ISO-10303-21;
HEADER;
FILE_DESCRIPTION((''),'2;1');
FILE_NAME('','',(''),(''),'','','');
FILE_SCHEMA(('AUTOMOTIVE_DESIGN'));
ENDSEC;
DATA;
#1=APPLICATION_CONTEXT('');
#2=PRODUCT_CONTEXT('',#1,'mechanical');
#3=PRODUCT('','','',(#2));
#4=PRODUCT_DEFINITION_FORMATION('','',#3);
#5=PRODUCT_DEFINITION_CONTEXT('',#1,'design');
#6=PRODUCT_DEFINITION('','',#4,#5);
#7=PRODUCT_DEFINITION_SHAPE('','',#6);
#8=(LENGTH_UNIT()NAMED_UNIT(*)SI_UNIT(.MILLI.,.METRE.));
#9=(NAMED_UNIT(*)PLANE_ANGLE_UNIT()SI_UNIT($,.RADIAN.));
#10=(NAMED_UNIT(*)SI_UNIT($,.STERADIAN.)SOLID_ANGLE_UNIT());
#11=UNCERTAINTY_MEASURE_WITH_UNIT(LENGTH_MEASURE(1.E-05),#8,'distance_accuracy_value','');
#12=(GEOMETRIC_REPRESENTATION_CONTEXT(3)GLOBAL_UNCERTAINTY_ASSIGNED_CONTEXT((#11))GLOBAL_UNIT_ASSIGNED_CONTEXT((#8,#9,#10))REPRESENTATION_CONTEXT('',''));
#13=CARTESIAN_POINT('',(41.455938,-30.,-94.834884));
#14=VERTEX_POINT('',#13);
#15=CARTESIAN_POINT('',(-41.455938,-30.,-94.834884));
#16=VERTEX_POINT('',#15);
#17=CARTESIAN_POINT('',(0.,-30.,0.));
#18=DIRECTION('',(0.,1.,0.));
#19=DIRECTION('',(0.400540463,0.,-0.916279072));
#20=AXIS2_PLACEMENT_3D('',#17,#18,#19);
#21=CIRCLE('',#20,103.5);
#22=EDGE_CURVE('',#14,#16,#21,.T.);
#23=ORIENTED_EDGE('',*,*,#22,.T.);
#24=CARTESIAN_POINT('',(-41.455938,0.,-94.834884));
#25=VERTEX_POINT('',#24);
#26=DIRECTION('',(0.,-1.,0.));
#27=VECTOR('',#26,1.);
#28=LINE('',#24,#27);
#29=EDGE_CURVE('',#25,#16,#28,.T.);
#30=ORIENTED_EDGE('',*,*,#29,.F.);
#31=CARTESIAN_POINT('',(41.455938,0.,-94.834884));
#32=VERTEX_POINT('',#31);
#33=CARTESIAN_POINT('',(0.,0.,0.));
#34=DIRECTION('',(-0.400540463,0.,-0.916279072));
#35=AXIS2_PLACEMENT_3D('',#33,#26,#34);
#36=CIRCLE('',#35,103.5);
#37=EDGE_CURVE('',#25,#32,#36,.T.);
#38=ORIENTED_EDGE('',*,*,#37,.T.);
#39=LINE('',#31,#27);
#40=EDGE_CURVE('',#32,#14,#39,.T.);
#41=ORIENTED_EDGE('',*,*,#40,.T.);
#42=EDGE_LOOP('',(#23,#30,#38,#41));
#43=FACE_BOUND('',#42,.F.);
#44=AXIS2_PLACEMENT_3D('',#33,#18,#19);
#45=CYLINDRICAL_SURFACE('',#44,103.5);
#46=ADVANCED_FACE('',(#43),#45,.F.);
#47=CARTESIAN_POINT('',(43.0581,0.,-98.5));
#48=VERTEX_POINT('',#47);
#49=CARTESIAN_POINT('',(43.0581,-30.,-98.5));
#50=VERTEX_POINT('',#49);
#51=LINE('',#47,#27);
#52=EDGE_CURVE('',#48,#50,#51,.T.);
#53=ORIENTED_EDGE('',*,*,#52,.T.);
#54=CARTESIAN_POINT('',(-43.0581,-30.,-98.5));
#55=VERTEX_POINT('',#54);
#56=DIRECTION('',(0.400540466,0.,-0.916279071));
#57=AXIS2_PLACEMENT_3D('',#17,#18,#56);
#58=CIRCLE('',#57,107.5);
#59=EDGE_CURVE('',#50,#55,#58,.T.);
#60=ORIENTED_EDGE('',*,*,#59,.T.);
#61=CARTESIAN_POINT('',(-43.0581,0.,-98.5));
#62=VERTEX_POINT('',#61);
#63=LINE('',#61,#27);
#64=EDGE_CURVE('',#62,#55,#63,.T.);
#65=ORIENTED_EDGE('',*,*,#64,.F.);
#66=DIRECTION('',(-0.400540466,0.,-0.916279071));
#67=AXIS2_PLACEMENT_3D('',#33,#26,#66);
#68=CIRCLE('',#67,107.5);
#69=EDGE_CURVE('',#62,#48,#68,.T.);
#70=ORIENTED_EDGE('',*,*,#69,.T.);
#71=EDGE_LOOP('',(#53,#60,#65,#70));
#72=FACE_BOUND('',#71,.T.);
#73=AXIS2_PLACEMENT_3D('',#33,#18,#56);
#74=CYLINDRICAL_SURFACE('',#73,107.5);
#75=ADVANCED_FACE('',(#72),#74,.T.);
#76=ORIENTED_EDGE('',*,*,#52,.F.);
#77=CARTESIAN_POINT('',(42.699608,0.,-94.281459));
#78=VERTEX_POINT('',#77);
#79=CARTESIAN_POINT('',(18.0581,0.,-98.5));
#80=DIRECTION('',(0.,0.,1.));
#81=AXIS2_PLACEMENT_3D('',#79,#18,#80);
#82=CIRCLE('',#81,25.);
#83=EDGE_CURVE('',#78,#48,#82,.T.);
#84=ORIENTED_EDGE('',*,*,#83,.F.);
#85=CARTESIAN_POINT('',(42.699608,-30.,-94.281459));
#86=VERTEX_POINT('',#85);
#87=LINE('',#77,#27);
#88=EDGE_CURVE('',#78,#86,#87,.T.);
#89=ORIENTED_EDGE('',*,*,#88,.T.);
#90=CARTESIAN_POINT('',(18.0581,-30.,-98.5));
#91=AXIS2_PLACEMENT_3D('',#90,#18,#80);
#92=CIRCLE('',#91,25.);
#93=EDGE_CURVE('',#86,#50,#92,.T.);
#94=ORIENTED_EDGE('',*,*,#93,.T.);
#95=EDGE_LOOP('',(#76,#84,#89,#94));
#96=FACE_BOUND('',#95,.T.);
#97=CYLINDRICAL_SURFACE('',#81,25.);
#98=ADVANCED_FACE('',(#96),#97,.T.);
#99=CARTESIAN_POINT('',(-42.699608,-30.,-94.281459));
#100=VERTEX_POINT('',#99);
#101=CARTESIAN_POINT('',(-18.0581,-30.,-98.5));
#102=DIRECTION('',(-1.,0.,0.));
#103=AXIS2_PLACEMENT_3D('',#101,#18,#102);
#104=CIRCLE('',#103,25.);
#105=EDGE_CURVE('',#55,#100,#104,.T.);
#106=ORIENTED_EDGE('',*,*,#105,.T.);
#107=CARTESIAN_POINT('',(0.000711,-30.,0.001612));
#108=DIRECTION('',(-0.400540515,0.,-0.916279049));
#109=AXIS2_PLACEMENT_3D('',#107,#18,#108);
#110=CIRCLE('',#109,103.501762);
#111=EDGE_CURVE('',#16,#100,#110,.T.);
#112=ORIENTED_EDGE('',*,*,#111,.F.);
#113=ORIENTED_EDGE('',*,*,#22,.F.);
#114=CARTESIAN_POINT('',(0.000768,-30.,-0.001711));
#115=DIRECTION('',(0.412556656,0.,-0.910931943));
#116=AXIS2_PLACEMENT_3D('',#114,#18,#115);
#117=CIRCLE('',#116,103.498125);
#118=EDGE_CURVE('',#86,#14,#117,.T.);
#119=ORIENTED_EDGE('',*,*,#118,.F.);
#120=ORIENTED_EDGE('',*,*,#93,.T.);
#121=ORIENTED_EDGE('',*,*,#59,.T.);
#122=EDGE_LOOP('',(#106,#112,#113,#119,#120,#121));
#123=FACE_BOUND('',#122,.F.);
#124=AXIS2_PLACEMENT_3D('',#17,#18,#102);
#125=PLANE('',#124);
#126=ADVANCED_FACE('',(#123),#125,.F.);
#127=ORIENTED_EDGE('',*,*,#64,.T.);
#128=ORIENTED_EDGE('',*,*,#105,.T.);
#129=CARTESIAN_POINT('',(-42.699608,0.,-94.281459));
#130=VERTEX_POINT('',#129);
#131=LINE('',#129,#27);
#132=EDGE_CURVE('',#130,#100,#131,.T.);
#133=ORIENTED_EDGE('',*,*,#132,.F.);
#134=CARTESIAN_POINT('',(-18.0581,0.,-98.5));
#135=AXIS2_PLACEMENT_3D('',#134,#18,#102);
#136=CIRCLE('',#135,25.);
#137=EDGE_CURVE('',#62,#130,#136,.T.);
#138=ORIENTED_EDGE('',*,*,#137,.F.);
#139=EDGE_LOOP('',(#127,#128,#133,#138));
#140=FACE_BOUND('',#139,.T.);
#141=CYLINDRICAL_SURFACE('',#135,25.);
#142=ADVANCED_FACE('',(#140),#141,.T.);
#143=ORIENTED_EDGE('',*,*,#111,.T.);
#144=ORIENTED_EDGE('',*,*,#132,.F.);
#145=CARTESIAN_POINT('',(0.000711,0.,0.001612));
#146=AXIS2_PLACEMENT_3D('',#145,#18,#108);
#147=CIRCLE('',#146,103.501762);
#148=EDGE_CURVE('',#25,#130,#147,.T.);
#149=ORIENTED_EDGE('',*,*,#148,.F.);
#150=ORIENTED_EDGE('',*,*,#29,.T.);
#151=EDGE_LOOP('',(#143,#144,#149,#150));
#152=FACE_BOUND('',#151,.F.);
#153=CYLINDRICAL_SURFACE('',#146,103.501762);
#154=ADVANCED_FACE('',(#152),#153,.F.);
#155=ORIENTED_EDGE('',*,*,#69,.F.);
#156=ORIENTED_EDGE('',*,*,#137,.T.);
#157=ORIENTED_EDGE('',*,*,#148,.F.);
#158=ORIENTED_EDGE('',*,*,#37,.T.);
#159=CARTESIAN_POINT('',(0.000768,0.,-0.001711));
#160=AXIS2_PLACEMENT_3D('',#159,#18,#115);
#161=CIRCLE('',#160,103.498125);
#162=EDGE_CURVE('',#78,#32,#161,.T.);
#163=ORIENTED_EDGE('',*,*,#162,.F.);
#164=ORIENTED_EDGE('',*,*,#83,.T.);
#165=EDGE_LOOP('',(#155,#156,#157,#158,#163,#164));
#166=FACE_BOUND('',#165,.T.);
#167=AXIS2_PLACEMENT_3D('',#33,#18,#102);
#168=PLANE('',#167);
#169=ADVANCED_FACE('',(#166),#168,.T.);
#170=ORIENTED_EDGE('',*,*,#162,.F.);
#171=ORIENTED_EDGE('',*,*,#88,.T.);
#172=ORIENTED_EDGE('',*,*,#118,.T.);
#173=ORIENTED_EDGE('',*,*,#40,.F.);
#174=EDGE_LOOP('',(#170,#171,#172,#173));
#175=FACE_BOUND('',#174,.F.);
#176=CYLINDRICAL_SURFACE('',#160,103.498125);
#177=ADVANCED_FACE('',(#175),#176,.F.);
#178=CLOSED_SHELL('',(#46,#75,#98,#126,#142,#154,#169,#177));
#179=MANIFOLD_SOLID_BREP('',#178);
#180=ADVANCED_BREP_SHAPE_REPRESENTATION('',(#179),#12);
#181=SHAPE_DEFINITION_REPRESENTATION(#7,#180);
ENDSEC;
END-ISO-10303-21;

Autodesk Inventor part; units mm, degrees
ref_plane "YZ Plane" through (0, 0, 0) normal (1, 0, 0) x (0, 1, 0)
ref_plane "XZ Plane" through (0, 0, 0) normal (0, 1, 0) x (-1, 0, 0)
sketch "Sketch1" plane through (0, 0, 0) normal (0, 1, 0) x (-1, 0, 0)
  circle A0 centre (0, 0) radius 110 construction
  arc A1 (43.0581, -98.5) -> (-43.0581, -98.5) centre (0, 0) ccw
  line L0 (0, -107.5) -> (0, -98.5) construction
  line L1 (0, -98.5) -> (0, -73.5) construction
  line L2 (0, -98.5) -> (-43.0581, -98.5) construction
  line L3 (0, -98.5) -> (43.0581, -98.5) construction
  line L4 (43.0581, -98.5) -> (-43.0581, -98.5) construction
  line L5 (-18.0581, -73.5) -> (18.0581, -73.5)
  arc A2 (43.0581, -98.5) -> (18.0581, -73.5) centre (18.0581, -98.5) ccw
  arc A3 (-18.0581, -73.5) -> (-43.0581, -98.5) centre (-18.0581, -98.5) ccw
  line L6 (0, 107.5) -> (0, 97.5) construction
  line L7 (0, 97.5) -> (-22.5, 97.5) construction
  line L8 (-22.5, 97.5) -> (-22.5, 82.5) construction
  line L9 (22.5, 82.5) -> (22.5, 97.5) construction
  line L10 (22.5, 90) -> (-22.5, 90) construction
  line L11 (15, 97.5) -> (-15, 97.5)
  line L12 (-15, 82.5) -> (15, 82.5)
  arc A4 (15, 82.5) -> (15, 97.5) centre (15, 90) ccw
  arc A5 (-15, 97.5) -> (-15, 82.5) centre (-15, 90) ccw
  line L13 (22.5, 82.5) -> (17.5, 82.5) construction
  line L14 (17.5, 82.5) -> (17.5, 77.5) construction
  circle A6 centre (17.5, 77.5) radius 1.6
  circle A7 centre (-17.5, 77.5) radius 1.6
  line L15 (-58.336309, 79.549513) -> (-79.549513, 58.336309)
  arc A8 (-47.729708, 68.942911) -> (-58.336309, 79.549513) centre (-53.033009, 74.246212) ccw
  arc A9 (-79.549513, 58.336309) -> (-68.942911, 47.729708) centre (-74.246212, 53.033009) ccw
  line L16 (-68.942911, 47.729708) -> (-47.729708, 68.942911)
  circle A10 centre (-67.175144, 42.426407) radius 1.6
  circle A11 centre (-42.426407, 67.175144) radius 1.6
  line L17 (-97.5, 15) -> (-97.5, -15)
  arc A12 (-82.5, 15) -> (-97.5, 15) centre (-90, 15) ccw
  arc A13 (-97.5, -15) -> (-82.5, -15) centre (-90, -15) ccw
  line L18 (-82.5, -15) -> (-82.5, 15)
  circle A14 centre (-77.5, -17.5) radius 1.6
  circle A15 centre (-77.5, 17.5) radius 1.6
  line L19 (-79.549513, -58.336309) -> (-58.336309, -79.549513)
  arc A16 (-68.942911, -47.729708) -> (-79.549513, -58.336309) centre (-74.246212, -53.033009) ccw
  arc A17 (-58.336309, -79.549513) -> (-47.729708, -68.942911) centre (-53.033009, -74.246212) ccw
  line L20 (-47.729708, -68.942911) -> (-68.942911, -47.729708)
  circle A18 centre (-42.426407, -67.175144) radius 1.6
  circle A19 centre (-67.175144, -42.426407) radius 1.6
  line L21 (-15, -97.5) -> (15, -97.5)
  arc A20 (-15, -82.5) -> (-15, -97.5) centre (-15, -90) ccw
  arc A21 (15, -97.5) -> (15, -82.5) centre (15, -90) ccw
  line L22 (15, -82.5) -> (-15, -82.5)
  circle A22 centre (17.5, -77.5) radius 1.6
  circle A23 centre (-17.5, -77.5) radius 1.6
  line L23 (58.336309, -79.549513) -> (79.549513, -58.336309)
  arc A24 (47.729708, -68.942911) -> (58.336309, -79.549513) centre (53.033009, -74.246212) ccw
  arc A25 (79.549513, -58.336309) -> (68.942911, -47.729708) centre (74.246212, -53.033009) ccw
  line L24 (68.942911, -47.729708) -> (47.729708, -68.942911)
  circle A26 centre (67.175144, -42.426407) radius 1.6
  circle A27 centre (42.426407, -67.175144) radius 1.6
  line L25 (97.5, -15) -> (97.5, 15)
  arc A28 (82.5, -15) -> (97.5, -15) centre (90, -15) ccw
  arc A29 (97.5, 15) -> (82.5, 15) centre (90, 15) ccw
  line L26 (82.5, 15) -> (82.5, -15)
  circle A30 centre (77.5, 17.5) radius 1.6
  circle A31 centre (77.5, -17.5) radius 1.6
  line L27 (79.549513, 58.336309) -> (58.336309, 79.549513)
  arc A32 (68.942911, 47.729708) -> (79.549513, 58.336309) centre (74.246212, 53.033009) ccw
  arc A33 (58.336309, 79.549513) -> (47.729708, 68.942911) centre (53.033009, 74.246212) ccw
  line L28 (47.729708, 68.942911) -> (68.942911, 47.729708)
  circle A34 centre (42.426407, 67.175144) radius 1.6
  circle A35 centre (67.175144, 42.426407) radius 1.6
  line L29 (58.336309, -58.336309) -> (51.265242, -51.265242) construction
  line L30 (40.65864, -61.871843) -> (61.871843, -40.65864)
  arc A36 (40.65864, -61.871843) -> (44.52672, -89.539774) centre (53.033009, -74.246212) ccw
  arc A37 (89.539774, -44.52672) -> (61.871843, -40.65864) centre (74.246212, -53.033009) ccw
  line L31 (0, -73.5) -> (0, -66.5) construction
  arc A38 (44.52672, 89.539774) -> (40.65864, 61.871843) centre (53.033009, 74.246212) ccw
  line L32 (61.871843, 40.65864) -> (40.65864, 61.871843)
  arc A39 (61.871843, 40.65864) -> (89.539774, 44.52672) centre (74.246212, 53.033009) ccw
  arc A40 (-89.539774, 44.52672) -> (-61.871843, 40.65864) centre (-74.246212, 53.033009) ccw
  line L33 (-40.65864, 61.871843) -> (-61.871843, 40.65864)
  arc A41 (-40.65864, 61.871843) -> (-44.52672, 89.539774) centre (-53.033009, 74.246212) ccw
  arc A42 (-44.52672, -89.539774) -> (-40.65864, -61.871843) centre (-53.033009, -74.246212) ccw
  line L34 (-61.871843, -40.65864) -> (-40.65864, -61.871843)
  arc A43 (-61.871843, -40.65864) -> (-89.539774, -44.52672) centre (-74.246212, -53.033009) ccw
  arc A44 (89.539774, -44.52672) -> (89.539774, 44.52672) centre (0, 0) ccw
  arc A45 (44.52672, 89.539774) -> (-44.52672, 89.539774) centre (0, 0) ccw
  arc A46 (-89.539774, 44.52672) -> (-89.539774, -44.52672) centre (0, 0) ccw
  line L35 (43.0581, -98.5) -> (48.0581, -98.5) construction
  line L36 (48.0581, -98.5) -> (48.0581, -88.5) construction
  circle A47 centre (48.0581, -88.5) radius 1.6
  circle A48 centre (-48.0581, -88.5) radius 1.6
  line L37 (18.0581, -66.5) -> (-18.0581, -66.5)
  arc A49 (17.5, -66.5) -> (43.0581, -59.472383) centre (19.514525, -23.837671) ccw
  arc A50 (-44.52672, -58.003763) -> (-18.0581, -66.5) centre (-19.508856, -25.542168) ccw
  arc A51 (-48.0581, -88.5) -> (-42.426407, -67.175144) centre (-60.43967, -73.824078) ccw construction
  arc A52 (-48.0581, -88.5) -> (-42.426407, -67.175144) centre (-60.43967, -73.824078) ccw construction
  arc A53 (-44.936716, -92.199789) -> (-37.885276, -65.498953) centre (-60.43967, -73.824078) ccw
  arc A54 (-51.179485, -84.800211) -> (-46.967537, -68.851335) centre (-60.43967, -73.824078) ccw
  arc A55 (-51.179485, -84.800211) -> (-44.936716, -92.199789) centre (-48.0581, -88.5) ccw
  arc A56 (-37.885276, -65.498953) -> (-46.967537, -68.851335) centre (-42.426407, -67.175144) ccw
  line L38 (42.426407, 67.175144) -> (67.175144, 42.426407) construction
  line L39 (45.961941, 70.710678) -> (70.710678, 45.961941)
  line L40 (63.63961, 38.890873) -> (38.890873, 63.63961)
  arc A57 (45.961941, 70.710678) -> (38.890873, 63.63961) centre (42.426407, 67.175144) ccw
  arc A58 (63.63961, 38.890873) -> (70.710678, 45.961941) centre (67.175144, 42.426407) ccw
  line L41 (-42.426407, 67.175144) -> (-67.175144, 42.426407) construction
  line L42 (-45.961941, 70.710678) -> (-70.710678, 45.961941)
  line L43 (-63.63961, 38.890873) -> (-38.890873, 63.63961)
  arc A59 (-38.890873, 63.63961) -> (-45.961941, 70.710678) centre (-42.426407, 67.175144) ccw
  arc A60 (-70.710678, 45.961941) -> (-63.63961, 38.890873) centre (-67.175144, 42.426407) ccw
  line L44 (-42.426407, 67.175144) -> (42.426407, 67.175144) construction
  line L45 (-42.426407, 62.175144) -> (42.426407, 62.175144)
  line L46 (42.426407, 72.175144) -> (-42.426407, 72.175144)
  arc A61 (-42.426407, 72.175144) -> (-42.426407, 62.175144) centre (-42.426407, 67.175144) ccw
  arc A62 (42.426407, 62.175144) -> (42.426407, 72.175144) centre (42.426407, 67.175144) ccw
  line L47 (37.025198, 67.175144) -> (33.025198, 67.175144) construction
  line L48 (33.025198, 67.175144) -> (32.025198, 67.175144) construction
  line L49 (31.025198, 70.425144) -> (31.025198, 63.925144)
  line L50 (31.025198, 63.925144) -> (33.025198, 63.925144)
  line L51 (33.025198, 63.925144) -> (33.025198, 70.425144)
  line L52 (33.025198, 70.425144) -> (31.025198, 70.425144)
  line L53 (31.025198, 70.425144) -> (33.025198, 63.925144) construction
  line L54 (31.025198, 63.925144) -> (33.025198, 70.425144) construction
  line L55 (0, 67.175144) -> (0, 56.50884) construction
  line L56 (-31.025198, 70.425144) -> (-31.025198, 63.925144)
  line L57 (-31.025198, 63.925144) -> (-33.025198, 63.925144)
  line L58 (-33.025198, 63.925144) -> (-33.025198, 70.425144)
  line L59 (-33.025198, 70.425144) -> (-31.025198, 70.425144)
  arc A63 (-43.0581, -98.5) -> (43.0581, -98.5) centre (0, 0) ccw
  line L60 (0, -107.5) -> (0, -103.5)
  arc A64 (-41.455938, -94.834884) -> (41.455938, -94.834884) centre (0, 0) ccw
  arc A65 (41.455938, -94.834884) -> (42.699608, -94.281459) centre (0, 0) ccw
  arc A66 (-42.699608, -94.281459) -> (-41.455938, -94.834884) centre (0.000004, 0.000008) ccw
  point P0 (0, 90)
  point P1 (-45.961941, 70.710678)
  point P2 (-82.5, 17.5)
  point P3 (-70.710678, -45.961941)
  point P4 (-17.5, -82.5)
  point P5 (45.961941, -70.710678)
  point P6 (82.5, -17.5)
  point P7 (70.710678, 45.961941)
  point P8 (35.715922, -76.769806)
  point P9 (-37.90233, -65.453455)
  point P10 (-39.097126, -63.661261)
  point P11 (-46.422064, -70.704261)
  point P12 (-46.867306, -78.516354)
  point P13 (0, -44.52672)
  point P14 (0, 35.701561)
  point P15 (54.800776, 54.800776)
  point P16 (-54.800776, 54.800776)
  point P17 (40.355339, 62.175144)
  point P18 (40.65864, 61.871843)
  point P19 (-47.729708, 68.942911)
  point P20 (-68.942911, 47.729708)
  point P21 (-61.871843, 40.65864)
  point P22 (-40.355339, 62.175144)
  dimension "d0" = 220
  dimension "d1" = 215
  dimension "d2" = 9
  dimension "d3" = 25
  dimension "d4" = 10
  dimension "d5" = 22.5
  dimension "d6" = 15
  dimension "d7" = 45
  dimension "d8" = 5
  dimension "d9" = 5
  dimension "d10" = 3.2
  dimension "d15" = 86.1162
  dimension "d16" = 45
  dimension "d19" = 360
  dimension "d22" = 10
  dimension "d23" = 7
  dimension "d26" = 360
  dimension "d33" = 5
  dimension "d34" = 10
  dimension "d35" = 3.2
  dimension "d68" = 4
  dimension "d69" = 1
  dimension "d70" = 6.5
  dimension "d71" = 2
  dimension "d123" = 4
ref_plane "Work Plane4" through (0, 0, -44.52672) normal (1, 0, 0) x (0, 0.9903099, -0.1388753)
extrude "Extrusion13" add sketch "Sketch1" against normal blind 30 contours A63 L60 A64 A65 A2 | A3 A66 A64 L60 A63
properties part number "MettalringUnten_v3"
